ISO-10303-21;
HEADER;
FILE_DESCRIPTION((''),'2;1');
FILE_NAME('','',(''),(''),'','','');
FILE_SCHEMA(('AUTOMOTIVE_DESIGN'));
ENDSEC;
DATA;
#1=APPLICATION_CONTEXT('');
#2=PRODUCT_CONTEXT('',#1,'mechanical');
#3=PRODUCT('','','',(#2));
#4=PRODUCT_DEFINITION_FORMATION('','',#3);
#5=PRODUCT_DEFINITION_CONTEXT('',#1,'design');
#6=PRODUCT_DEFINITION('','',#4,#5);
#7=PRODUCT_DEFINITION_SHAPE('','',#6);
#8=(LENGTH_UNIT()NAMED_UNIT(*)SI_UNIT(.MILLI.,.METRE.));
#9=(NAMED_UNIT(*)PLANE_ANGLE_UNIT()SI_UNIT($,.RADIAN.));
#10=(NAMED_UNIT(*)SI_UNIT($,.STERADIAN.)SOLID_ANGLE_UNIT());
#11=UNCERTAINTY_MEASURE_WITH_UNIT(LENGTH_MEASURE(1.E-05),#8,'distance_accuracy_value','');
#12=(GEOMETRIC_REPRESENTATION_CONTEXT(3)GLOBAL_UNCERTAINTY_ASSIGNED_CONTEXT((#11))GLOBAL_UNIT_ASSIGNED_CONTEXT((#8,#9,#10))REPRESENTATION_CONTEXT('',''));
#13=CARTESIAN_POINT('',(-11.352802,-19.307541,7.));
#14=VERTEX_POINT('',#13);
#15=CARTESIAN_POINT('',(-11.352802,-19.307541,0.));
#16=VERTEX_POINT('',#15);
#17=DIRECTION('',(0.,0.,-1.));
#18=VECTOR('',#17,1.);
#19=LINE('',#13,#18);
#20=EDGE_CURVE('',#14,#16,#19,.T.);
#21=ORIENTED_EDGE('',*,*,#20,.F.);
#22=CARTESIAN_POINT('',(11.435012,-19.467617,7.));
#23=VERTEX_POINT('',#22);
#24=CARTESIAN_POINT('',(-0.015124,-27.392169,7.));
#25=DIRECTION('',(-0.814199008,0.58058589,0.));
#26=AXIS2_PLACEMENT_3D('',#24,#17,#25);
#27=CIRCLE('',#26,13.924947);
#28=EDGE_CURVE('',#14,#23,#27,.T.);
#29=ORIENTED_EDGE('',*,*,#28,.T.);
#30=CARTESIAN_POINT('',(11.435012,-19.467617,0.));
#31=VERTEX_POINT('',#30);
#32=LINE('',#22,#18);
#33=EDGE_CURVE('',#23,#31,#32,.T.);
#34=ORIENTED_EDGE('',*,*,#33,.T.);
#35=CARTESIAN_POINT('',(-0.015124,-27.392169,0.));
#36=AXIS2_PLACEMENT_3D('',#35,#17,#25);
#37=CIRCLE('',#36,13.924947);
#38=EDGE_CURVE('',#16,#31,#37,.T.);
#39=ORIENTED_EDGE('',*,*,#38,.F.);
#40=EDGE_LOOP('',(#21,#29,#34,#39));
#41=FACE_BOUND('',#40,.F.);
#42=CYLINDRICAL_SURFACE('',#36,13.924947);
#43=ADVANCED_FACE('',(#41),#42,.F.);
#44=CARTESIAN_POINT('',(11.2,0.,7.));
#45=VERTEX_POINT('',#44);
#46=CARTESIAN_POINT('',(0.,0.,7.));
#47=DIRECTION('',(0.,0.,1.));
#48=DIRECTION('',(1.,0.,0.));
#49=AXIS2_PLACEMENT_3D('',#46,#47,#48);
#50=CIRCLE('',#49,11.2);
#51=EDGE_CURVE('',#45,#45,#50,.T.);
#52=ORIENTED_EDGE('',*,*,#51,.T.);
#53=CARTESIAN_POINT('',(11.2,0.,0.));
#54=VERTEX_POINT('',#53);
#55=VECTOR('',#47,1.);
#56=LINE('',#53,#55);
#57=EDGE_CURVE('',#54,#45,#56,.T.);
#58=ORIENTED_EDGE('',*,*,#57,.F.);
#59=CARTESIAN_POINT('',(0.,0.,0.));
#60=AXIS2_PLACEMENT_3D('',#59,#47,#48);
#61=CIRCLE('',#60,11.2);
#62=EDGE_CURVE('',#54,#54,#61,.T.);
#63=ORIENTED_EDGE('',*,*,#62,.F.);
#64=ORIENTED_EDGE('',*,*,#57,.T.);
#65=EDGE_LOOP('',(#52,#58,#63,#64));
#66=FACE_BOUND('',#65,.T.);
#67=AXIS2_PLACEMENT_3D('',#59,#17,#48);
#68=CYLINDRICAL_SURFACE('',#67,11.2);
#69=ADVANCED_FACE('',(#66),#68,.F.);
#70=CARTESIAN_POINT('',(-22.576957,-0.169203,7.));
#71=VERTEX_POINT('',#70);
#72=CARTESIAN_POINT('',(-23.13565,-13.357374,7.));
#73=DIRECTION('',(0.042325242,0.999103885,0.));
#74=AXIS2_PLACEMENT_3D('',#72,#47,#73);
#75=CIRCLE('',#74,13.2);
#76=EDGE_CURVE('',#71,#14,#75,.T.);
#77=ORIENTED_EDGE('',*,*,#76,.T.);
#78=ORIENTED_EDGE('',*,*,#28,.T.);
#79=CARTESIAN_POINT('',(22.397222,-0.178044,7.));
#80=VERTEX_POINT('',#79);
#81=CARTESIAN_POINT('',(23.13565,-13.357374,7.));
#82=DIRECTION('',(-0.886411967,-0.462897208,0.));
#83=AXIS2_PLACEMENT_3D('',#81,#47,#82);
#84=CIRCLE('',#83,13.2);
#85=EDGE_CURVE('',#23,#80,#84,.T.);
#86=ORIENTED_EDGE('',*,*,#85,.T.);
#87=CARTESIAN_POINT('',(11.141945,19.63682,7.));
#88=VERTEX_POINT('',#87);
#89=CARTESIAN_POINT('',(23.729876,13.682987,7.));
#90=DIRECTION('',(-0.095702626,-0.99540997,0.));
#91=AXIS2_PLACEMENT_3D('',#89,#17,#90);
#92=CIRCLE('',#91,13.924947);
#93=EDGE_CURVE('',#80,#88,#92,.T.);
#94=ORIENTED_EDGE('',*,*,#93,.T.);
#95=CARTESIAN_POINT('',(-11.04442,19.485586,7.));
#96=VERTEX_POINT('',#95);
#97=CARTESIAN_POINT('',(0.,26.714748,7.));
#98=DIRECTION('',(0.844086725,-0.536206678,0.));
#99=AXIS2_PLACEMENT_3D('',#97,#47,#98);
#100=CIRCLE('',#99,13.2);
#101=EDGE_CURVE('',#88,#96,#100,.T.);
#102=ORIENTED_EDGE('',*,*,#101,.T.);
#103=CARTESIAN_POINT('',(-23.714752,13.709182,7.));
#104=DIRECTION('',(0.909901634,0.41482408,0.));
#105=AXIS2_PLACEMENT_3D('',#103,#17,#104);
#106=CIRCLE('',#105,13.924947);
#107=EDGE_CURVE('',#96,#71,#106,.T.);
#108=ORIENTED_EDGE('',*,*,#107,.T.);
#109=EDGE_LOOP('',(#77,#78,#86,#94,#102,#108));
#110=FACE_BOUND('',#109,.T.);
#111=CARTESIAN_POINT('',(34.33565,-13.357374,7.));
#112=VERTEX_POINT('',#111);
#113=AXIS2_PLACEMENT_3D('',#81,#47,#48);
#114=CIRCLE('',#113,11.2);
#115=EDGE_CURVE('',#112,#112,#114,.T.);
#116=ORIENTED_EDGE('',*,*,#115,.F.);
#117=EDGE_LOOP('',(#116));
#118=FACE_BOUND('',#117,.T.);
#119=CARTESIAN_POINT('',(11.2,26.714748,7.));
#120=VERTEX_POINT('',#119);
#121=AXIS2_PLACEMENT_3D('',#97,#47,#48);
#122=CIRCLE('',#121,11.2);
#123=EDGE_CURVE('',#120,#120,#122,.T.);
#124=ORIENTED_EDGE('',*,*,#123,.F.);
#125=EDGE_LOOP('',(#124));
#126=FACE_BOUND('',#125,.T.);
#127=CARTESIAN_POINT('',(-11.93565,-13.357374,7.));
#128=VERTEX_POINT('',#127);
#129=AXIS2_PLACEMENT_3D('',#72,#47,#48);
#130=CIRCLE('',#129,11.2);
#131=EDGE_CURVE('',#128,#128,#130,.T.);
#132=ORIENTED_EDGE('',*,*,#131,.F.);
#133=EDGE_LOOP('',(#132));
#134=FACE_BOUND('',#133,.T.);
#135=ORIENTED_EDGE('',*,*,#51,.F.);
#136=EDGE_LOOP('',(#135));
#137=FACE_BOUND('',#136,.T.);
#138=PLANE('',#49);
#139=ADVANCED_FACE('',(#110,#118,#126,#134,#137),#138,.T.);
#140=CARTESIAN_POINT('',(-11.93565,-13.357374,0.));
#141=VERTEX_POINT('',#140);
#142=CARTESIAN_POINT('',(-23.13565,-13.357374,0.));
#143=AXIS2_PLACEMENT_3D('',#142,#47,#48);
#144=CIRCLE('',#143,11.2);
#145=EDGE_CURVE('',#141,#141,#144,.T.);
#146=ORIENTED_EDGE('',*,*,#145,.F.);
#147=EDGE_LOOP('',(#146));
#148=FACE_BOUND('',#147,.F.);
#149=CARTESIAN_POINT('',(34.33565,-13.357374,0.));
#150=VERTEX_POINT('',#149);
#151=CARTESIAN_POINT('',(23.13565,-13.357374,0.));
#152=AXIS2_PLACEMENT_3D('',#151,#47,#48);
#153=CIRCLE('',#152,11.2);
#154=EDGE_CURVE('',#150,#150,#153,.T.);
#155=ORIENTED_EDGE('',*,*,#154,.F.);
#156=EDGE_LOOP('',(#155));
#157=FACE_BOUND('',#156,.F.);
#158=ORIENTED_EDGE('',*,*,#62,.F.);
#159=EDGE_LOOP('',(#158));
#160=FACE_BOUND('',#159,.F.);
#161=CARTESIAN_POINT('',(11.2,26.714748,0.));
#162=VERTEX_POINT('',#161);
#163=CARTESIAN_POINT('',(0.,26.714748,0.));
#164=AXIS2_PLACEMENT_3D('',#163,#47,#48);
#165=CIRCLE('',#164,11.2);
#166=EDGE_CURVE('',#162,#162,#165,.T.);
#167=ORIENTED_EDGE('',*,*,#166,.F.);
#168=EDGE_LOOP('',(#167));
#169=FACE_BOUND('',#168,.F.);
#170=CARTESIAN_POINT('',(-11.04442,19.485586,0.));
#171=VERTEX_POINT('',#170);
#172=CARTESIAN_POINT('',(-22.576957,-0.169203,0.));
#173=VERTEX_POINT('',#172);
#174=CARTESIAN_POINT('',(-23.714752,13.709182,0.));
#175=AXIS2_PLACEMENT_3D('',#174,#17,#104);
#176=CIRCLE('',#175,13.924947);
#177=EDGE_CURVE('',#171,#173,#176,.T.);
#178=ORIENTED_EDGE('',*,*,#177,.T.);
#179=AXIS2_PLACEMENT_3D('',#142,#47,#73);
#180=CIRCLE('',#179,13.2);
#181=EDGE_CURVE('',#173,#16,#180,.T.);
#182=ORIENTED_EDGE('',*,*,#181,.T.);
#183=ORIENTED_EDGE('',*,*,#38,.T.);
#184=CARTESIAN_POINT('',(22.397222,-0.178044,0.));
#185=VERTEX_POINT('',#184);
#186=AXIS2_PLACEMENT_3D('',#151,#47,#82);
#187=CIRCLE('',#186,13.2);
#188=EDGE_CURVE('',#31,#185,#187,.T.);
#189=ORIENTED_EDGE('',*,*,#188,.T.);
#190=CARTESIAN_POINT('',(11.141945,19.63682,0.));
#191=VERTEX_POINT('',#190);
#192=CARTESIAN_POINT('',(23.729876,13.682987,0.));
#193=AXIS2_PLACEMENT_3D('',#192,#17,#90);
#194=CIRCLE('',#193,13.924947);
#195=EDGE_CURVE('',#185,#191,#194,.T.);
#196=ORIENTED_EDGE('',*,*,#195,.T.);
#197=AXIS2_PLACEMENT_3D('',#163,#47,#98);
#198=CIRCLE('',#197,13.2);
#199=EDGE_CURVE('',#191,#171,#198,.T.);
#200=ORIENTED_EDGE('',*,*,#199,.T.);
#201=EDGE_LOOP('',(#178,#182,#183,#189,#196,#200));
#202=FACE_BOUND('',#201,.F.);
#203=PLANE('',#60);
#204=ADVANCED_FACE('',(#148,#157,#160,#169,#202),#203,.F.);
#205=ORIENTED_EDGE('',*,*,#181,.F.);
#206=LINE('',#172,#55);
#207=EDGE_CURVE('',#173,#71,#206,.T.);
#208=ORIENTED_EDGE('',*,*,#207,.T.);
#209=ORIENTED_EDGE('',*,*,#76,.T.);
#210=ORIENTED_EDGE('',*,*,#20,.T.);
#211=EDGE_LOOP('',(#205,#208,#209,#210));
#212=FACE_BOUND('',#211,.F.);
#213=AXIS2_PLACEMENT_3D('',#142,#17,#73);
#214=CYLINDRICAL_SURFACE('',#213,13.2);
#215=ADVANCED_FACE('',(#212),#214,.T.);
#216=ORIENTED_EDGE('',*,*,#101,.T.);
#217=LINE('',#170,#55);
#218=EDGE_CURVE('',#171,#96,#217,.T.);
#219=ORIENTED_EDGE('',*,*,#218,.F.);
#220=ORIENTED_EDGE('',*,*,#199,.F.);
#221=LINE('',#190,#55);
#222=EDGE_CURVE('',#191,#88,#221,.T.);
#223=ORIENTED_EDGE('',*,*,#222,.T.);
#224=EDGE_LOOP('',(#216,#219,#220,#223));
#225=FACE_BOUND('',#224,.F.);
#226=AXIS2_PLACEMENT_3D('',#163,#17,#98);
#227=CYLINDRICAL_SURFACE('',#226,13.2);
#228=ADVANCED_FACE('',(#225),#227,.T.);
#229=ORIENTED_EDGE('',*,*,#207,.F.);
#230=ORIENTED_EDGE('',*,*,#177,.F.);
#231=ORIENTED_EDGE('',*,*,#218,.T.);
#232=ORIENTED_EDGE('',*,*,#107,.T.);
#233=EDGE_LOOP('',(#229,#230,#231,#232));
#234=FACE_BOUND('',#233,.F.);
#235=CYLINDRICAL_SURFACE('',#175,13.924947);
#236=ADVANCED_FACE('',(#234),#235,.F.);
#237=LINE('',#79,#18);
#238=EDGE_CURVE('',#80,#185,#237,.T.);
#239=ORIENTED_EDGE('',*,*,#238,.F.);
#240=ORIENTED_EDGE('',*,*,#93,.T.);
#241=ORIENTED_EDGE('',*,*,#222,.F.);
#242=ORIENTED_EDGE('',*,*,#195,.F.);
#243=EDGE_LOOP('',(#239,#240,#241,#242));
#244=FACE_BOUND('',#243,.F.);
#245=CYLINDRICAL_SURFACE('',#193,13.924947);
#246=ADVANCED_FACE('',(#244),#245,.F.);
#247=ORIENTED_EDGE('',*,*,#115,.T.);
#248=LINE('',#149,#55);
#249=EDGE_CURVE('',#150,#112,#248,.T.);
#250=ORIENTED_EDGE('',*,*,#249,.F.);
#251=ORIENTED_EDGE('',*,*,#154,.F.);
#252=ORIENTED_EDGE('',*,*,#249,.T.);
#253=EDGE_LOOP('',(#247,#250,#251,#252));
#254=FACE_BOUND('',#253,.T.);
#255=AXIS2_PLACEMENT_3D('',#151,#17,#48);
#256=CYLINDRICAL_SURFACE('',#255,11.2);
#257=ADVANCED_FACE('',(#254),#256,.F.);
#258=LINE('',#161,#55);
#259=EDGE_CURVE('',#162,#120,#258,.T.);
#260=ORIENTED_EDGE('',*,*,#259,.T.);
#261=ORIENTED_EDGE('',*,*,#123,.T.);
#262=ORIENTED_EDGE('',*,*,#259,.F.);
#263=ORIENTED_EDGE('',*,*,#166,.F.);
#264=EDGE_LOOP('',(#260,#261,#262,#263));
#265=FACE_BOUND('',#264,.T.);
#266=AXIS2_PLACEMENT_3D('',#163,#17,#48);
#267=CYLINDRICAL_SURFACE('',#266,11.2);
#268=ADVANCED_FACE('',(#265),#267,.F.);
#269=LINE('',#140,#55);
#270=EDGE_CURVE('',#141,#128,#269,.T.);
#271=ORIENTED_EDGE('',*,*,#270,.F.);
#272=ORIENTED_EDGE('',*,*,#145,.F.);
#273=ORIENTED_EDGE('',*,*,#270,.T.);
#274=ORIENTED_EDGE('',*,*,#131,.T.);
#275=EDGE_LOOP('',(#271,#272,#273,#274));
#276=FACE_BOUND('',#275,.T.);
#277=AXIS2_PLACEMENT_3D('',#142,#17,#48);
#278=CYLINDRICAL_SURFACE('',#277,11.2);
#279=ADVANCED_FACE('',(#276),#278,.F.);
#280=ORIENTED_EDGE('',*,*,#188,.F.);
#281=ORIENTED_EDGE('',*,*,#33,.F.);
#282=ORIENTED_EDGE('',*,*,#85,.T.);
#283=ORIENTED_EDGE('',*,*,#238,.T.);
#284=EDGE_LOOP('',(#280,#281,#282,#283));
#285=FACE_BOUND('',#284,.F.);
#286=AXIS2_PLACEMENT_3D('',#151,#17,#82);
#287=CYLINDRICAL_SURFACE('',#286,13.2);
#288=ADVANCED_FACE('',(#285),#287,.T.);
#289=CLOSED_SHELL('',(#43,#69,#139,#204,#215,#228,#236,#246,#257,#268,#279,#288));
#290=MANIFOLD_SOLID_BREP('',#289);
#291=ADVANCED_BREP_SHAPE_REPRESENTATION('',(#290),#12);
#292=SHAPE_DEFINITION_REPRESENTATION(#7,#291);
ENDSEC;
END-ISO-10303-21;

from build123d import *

# Parameters (mm, degrees)
F0_R     = 11.2
F1_DEPTH = 7
F2_R     = 1.5
F3_DEPTH = 7


# Not quite as in the source:
# - a feature names something its author has since deleted; it is built from what else it names


with BuildPart() as f1:
    # F0 (on Top) → F1 (new body)
    with BuildSketch(Plane.XY):
        with BuildLine():
            ThreePointArc((22.3972222345, -0.1780444605), (11.6219084102, 6.8053952105), (11.1419447663, 19.6368196267))
            ThreePointArc((11.1419447663, 19.6368196267), (-0.0899760733, 39.914441113), (-11.0444200915, 19.4855856595))
            ThreePointArc((-11.0444200915, 19.4855856595), (-11.7045993402, 6.6621703185), (-22.5769570295, -0.1692025982))
            ThreePointArc((-22.5769570295, -0.1692025982), (-34.5219319451, -20.0351421217), (-11.352802143, -19.3075411991))
            ThreePointArc((-11.352802143, -19.3075411991), (0.08269093, -13.467565529), (11.4350122631, -19.4676170286))
            ThreePointArc((11.4350122631, -19.4676170286), (34.6119080183, -19.8792989913), (22.3972222345, -0.1780444605))
        make_face()
        with Locations((-23.1356502259, -13.3573738858)):
            Circle(F0_R, mode=Mode.SUBTRACT)
        with Locations((23.1356502259, -13.3573738858)):
            Circle(F0_R, mode=Mode.SUBTRACT)
        Circle(F0_R, mode=Mode.SUBTRACT)
        with Locations((0, 26.7147477716)):
            Circle(F0_R, mode=Mode.SUBTRACT)
    extrude(amount=F1_DEPTH)

    # F2 (call 1 of 2: OpenCascade refuses the feature's edges together)
    f2_edges = [f1.edges().sort_by_distance(p)[0] for p in [
        (-34.521932, -20.035142, 7),
        (-11.704599, 6.66217, 7),
        (34.611908, -19.879299, 7),
        (-0.089976, 39.914441, 7),
        (0.082691, -13.467566, 7),
        (11.621908, 6.805395, 7),
    ]]
    fillet(f2_edges, radius=F2_R)

    # F2#2 (call 2 of 2)
    f2_2_edges = [f1.edges().sort_by_distance(p)[0] for p in [
        (34.611908, -19.879299, 0),
        (0.082691, -13.467566, 0),
        (-34.521932, -20.035142, 0),
        (-0.089976, 39.914441, 0),
        (11.621908, 6.805395, 0),
        (-11.704599, 6.66217, 0),
    ]]
    fillet(f2_2_edges, radius=F2_R)

    # F0 (on Top) → F3 (join)
    with BuildSketch(Plane.XY):
        with BuildLine():
            ThreePointArc((22.3972222345, -0.1780444605), (11.6219084102, 6.8053952105), (11.1419447663, 19.6368196267))
            ThreePointArc((11.1419447663, 19.6368196267), (-0.0899760733, 39.914441113), (-11.0444200915, 19.4855856595))
            ThreePointArc((-11.0444200915, 19.4855856595), (-11.7045993402, 6.6621703185), (-22.5769570295, -0.1692025982))
            ThreePointArc((-22.5769570295, -0.1692025982), (-34.5219319451, -20.0351421217), (-11.352802143, -19.3075411991))
            ThreePointArc((-11.352802143, -19.3075411991), (0.08269093, -13.467565529), (11.4350122631, -19.4676170286))
            ThreePointArc((11.4350122631, -19.4676170286), (34.6119080183, -19.8792989913), (22.3972222345, -0.1780444605))
        make_face()
        with Locations((-23.1356502259, -13.3573738858)):
            Circle(F0_R, mode=Mode.SUBTRACT)
        with Locations((23.1356502259, -13.3573738858)):
            Circle(F0_R, mode=Mode.SUBTRACT)
        Circle(F0_R, mode=Mode.SUBTRACT)
        with Locations((0, 26.7147477716)):
            Circle(F0_R, mode=Mode.SUBTRACT)
    extrude(amount=F3_DEPTH)


solid = f1.part
